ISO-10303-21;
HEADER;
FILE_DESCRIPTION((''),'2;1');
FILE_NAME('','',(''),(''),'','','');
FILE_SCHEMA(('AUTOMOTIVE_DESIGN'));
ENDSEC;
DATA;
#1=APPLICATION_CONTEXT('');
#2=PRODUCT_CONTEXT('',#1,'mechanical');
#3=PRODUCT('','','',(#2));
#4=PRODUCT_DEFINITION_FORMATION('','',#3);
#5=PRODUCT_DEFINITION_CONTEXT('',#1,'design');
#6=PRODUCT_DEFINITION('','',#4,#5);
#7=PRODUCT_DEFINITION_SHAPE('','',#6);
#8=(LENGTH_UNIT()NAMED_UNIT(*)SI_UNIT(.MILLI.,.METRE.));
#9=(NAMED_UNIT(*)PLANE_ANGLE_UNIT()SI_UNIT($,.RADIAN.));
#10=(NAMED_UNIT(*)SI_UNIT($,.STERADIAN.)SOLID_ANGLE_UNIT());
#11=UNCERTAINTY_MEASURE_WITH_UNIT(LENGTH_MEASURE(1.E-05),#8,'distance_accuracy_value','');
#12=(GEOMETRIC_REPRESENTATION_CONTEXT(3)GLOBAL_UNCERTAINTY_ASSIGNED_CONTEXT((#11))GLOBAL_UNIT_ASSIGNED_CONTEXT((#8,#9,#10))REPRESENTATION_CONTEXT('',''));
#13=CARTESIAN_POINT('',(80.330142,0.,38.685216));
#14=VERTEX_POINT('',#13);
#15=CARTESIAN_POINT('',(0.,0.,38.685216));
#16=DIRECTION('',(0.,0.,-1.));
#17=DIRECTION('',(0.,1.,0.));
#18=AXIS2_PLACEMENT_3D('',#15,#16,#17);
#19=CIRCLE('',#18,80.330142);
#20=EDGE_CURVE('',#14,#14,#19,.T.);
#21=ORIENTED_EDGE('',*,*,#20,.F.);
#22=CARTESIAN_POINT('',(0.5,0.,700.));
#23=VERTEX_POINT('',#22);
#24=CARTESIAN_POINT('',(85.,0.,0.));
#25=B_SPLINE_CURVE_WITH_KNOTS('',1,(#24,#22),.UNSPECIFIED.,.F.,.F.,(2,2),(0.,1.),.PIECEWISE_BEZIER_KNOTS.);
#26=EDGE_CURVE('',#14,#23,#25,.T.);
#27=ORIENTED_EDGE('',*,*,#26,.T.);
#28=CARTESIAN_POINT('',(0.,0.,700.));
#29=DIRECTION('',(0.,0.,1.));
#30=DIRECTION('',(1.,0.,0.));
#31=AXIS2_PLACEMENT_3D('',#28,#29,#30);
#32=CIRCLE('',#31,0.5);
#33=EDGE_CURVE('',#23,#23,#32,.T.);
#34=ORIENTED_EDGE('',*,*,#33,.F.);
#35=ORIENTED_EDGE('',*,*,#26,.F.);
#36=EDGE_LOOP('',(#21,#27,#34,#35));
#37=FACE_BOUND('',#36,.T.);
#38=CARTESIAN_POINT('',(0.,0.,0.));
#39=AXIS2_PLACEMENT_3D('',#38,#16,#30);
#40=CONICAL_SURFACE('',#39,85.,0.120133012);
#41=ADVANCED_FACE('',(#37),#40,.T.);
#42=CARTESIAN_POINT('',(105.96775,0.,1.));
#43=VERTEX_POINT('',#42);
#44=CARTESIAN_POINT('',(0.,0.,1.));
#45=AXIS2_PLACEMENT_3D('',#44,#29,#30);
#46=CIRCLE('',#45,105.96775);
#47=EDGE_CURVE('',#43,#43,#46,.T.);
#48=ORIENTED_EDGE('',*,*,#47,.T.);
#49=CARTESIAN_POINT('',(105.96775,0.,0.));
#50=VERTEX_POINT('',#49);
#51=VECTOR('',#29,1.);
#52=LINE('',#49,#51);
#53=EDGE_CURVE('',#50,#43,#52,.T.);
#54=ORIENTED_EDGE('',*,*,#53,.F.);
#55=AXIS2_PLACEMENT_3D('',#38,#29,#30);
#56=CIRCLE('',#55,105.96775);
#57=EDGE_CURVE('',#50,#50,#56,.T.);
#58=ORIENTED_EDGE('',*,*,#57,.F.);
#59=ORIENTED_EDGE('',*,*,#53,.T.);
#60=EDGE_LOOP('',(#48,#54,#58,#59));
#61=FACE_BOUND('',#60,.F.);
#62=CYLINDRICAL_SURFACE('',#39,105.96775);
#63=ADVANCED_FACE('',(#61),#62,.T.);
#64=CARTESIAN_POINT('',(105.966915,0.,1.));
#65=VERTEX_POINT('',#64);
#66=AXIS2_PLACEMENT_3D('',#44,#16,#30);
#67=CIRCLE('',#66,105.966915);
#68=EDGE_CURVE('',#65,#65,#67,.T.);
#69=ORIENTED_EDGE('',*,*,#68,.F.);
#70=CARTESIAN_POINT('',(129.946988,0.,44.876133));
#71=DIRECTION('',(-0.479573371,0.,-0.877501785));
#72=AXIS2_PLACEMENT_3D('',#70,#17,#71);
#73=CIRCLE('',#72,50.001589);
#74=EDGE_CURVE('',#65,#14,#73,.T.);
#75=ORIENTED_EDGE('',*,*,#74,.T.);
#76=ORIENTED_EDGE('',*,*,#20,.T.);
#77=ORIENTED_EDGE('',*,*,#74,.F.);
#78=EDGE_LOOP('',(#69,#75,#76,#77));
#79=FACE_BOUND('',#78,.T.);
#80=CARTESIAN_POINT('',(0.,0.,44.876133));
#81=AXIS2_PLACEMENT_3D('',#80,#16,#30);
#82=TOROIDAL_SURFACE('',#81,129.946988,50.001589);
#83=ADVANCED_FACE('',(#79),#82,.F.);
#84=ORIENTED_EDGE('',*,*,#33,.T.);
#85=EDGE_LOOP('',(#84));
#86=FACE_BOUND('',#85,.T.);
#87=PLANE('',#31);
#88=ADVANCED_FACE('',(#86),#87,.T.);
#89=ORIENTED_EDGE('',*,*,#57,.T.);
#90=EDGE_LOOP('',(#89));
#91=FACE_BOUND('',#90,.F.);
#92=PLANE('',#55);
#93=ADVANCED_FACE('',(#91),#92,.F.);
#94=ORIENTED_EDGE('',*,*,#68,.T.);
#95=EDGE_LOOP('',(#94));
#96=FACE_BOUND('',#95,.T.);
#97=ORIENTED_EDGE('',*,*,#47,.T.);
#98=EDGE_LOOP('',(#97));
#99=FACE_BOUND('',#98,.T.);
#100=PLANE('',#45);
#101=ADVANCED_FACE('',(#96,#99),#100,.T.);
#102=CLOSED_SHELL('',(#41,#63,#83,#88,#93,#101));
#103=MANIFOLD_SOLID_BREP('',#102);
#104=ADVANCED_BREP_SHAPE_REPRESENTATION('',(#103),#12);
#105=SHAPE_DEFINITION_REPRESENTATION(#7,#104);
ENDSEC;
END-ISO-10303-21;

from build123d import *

# Parameters (mm, degrees)
F0_R     = 85
F2_R     = 0.5
F4_R     = 105.9677495378
F5_DEPTH = 1


# Not quite as in the source:
# - a fillet or chamfer that OpenCascade refuses, or shapes differently, is made with other operations: its cross-section is extruded or revolved along the edge and cut away or added


with BuildPart() as f3:
    # F0 (on Top) → F3 section 0
    with BuildSketch(Plane.XY):
        Circle(F0_R)
    # F2 (on offset) → F3 section 1
    with BuildSketch(Plane.XY.offset(700)):
        Circle(F2_R)
    loft()

    # F4 (on Top) → F5 (join)
    with BuildSketch(Plane.XY):
        Circle(F4_R)
    extrude(amount=F5_DEPTH)

    # F6: fillet of radius 50 on 1 edges, made by hand


with BuildPart() as f6_tool2:
    # F6_s3 → F6_t4 (revolve)
    with BuildSketch(Plane.XZ):
        with BuildLine():
            ThreePointArc((105.9675577084, 0.9996489993), (88.5489126941, 16.8340527655), (80.3057755127, 38.8837290936))
            Line((80.3057755127, 38.8837290936), (75.3416542323, 38.284488739))
            ThreePointArc((75.3416542323, 38.284488739), (77.6286078916, 19.3426481611), (79.9151644339, 0.4007596454))
            Line((79.9151644339, 0.4007596454), (84.8792857143, -4.0001589064))
            ThreePointArc((84.8792857143, -4.0001589064), (95.4234217114, -4.0001589064), (103.5696146476, -3.3879993647))
            Line((103.5696146476, -3.3879993647), (105.9675577084, 0.9996489993))
        make_face()
    revolve(axis=Axis((0, 0, 1), (0, 0, 1)))

    split(bisect_by=Plane.XY, keep=Keep.TOP)


with BuildPart() as f3_1:
    add(f3.part)

    # F6_t1: union F6_tool2
    add(f6_tool2.part)


solid = f3_1.part
